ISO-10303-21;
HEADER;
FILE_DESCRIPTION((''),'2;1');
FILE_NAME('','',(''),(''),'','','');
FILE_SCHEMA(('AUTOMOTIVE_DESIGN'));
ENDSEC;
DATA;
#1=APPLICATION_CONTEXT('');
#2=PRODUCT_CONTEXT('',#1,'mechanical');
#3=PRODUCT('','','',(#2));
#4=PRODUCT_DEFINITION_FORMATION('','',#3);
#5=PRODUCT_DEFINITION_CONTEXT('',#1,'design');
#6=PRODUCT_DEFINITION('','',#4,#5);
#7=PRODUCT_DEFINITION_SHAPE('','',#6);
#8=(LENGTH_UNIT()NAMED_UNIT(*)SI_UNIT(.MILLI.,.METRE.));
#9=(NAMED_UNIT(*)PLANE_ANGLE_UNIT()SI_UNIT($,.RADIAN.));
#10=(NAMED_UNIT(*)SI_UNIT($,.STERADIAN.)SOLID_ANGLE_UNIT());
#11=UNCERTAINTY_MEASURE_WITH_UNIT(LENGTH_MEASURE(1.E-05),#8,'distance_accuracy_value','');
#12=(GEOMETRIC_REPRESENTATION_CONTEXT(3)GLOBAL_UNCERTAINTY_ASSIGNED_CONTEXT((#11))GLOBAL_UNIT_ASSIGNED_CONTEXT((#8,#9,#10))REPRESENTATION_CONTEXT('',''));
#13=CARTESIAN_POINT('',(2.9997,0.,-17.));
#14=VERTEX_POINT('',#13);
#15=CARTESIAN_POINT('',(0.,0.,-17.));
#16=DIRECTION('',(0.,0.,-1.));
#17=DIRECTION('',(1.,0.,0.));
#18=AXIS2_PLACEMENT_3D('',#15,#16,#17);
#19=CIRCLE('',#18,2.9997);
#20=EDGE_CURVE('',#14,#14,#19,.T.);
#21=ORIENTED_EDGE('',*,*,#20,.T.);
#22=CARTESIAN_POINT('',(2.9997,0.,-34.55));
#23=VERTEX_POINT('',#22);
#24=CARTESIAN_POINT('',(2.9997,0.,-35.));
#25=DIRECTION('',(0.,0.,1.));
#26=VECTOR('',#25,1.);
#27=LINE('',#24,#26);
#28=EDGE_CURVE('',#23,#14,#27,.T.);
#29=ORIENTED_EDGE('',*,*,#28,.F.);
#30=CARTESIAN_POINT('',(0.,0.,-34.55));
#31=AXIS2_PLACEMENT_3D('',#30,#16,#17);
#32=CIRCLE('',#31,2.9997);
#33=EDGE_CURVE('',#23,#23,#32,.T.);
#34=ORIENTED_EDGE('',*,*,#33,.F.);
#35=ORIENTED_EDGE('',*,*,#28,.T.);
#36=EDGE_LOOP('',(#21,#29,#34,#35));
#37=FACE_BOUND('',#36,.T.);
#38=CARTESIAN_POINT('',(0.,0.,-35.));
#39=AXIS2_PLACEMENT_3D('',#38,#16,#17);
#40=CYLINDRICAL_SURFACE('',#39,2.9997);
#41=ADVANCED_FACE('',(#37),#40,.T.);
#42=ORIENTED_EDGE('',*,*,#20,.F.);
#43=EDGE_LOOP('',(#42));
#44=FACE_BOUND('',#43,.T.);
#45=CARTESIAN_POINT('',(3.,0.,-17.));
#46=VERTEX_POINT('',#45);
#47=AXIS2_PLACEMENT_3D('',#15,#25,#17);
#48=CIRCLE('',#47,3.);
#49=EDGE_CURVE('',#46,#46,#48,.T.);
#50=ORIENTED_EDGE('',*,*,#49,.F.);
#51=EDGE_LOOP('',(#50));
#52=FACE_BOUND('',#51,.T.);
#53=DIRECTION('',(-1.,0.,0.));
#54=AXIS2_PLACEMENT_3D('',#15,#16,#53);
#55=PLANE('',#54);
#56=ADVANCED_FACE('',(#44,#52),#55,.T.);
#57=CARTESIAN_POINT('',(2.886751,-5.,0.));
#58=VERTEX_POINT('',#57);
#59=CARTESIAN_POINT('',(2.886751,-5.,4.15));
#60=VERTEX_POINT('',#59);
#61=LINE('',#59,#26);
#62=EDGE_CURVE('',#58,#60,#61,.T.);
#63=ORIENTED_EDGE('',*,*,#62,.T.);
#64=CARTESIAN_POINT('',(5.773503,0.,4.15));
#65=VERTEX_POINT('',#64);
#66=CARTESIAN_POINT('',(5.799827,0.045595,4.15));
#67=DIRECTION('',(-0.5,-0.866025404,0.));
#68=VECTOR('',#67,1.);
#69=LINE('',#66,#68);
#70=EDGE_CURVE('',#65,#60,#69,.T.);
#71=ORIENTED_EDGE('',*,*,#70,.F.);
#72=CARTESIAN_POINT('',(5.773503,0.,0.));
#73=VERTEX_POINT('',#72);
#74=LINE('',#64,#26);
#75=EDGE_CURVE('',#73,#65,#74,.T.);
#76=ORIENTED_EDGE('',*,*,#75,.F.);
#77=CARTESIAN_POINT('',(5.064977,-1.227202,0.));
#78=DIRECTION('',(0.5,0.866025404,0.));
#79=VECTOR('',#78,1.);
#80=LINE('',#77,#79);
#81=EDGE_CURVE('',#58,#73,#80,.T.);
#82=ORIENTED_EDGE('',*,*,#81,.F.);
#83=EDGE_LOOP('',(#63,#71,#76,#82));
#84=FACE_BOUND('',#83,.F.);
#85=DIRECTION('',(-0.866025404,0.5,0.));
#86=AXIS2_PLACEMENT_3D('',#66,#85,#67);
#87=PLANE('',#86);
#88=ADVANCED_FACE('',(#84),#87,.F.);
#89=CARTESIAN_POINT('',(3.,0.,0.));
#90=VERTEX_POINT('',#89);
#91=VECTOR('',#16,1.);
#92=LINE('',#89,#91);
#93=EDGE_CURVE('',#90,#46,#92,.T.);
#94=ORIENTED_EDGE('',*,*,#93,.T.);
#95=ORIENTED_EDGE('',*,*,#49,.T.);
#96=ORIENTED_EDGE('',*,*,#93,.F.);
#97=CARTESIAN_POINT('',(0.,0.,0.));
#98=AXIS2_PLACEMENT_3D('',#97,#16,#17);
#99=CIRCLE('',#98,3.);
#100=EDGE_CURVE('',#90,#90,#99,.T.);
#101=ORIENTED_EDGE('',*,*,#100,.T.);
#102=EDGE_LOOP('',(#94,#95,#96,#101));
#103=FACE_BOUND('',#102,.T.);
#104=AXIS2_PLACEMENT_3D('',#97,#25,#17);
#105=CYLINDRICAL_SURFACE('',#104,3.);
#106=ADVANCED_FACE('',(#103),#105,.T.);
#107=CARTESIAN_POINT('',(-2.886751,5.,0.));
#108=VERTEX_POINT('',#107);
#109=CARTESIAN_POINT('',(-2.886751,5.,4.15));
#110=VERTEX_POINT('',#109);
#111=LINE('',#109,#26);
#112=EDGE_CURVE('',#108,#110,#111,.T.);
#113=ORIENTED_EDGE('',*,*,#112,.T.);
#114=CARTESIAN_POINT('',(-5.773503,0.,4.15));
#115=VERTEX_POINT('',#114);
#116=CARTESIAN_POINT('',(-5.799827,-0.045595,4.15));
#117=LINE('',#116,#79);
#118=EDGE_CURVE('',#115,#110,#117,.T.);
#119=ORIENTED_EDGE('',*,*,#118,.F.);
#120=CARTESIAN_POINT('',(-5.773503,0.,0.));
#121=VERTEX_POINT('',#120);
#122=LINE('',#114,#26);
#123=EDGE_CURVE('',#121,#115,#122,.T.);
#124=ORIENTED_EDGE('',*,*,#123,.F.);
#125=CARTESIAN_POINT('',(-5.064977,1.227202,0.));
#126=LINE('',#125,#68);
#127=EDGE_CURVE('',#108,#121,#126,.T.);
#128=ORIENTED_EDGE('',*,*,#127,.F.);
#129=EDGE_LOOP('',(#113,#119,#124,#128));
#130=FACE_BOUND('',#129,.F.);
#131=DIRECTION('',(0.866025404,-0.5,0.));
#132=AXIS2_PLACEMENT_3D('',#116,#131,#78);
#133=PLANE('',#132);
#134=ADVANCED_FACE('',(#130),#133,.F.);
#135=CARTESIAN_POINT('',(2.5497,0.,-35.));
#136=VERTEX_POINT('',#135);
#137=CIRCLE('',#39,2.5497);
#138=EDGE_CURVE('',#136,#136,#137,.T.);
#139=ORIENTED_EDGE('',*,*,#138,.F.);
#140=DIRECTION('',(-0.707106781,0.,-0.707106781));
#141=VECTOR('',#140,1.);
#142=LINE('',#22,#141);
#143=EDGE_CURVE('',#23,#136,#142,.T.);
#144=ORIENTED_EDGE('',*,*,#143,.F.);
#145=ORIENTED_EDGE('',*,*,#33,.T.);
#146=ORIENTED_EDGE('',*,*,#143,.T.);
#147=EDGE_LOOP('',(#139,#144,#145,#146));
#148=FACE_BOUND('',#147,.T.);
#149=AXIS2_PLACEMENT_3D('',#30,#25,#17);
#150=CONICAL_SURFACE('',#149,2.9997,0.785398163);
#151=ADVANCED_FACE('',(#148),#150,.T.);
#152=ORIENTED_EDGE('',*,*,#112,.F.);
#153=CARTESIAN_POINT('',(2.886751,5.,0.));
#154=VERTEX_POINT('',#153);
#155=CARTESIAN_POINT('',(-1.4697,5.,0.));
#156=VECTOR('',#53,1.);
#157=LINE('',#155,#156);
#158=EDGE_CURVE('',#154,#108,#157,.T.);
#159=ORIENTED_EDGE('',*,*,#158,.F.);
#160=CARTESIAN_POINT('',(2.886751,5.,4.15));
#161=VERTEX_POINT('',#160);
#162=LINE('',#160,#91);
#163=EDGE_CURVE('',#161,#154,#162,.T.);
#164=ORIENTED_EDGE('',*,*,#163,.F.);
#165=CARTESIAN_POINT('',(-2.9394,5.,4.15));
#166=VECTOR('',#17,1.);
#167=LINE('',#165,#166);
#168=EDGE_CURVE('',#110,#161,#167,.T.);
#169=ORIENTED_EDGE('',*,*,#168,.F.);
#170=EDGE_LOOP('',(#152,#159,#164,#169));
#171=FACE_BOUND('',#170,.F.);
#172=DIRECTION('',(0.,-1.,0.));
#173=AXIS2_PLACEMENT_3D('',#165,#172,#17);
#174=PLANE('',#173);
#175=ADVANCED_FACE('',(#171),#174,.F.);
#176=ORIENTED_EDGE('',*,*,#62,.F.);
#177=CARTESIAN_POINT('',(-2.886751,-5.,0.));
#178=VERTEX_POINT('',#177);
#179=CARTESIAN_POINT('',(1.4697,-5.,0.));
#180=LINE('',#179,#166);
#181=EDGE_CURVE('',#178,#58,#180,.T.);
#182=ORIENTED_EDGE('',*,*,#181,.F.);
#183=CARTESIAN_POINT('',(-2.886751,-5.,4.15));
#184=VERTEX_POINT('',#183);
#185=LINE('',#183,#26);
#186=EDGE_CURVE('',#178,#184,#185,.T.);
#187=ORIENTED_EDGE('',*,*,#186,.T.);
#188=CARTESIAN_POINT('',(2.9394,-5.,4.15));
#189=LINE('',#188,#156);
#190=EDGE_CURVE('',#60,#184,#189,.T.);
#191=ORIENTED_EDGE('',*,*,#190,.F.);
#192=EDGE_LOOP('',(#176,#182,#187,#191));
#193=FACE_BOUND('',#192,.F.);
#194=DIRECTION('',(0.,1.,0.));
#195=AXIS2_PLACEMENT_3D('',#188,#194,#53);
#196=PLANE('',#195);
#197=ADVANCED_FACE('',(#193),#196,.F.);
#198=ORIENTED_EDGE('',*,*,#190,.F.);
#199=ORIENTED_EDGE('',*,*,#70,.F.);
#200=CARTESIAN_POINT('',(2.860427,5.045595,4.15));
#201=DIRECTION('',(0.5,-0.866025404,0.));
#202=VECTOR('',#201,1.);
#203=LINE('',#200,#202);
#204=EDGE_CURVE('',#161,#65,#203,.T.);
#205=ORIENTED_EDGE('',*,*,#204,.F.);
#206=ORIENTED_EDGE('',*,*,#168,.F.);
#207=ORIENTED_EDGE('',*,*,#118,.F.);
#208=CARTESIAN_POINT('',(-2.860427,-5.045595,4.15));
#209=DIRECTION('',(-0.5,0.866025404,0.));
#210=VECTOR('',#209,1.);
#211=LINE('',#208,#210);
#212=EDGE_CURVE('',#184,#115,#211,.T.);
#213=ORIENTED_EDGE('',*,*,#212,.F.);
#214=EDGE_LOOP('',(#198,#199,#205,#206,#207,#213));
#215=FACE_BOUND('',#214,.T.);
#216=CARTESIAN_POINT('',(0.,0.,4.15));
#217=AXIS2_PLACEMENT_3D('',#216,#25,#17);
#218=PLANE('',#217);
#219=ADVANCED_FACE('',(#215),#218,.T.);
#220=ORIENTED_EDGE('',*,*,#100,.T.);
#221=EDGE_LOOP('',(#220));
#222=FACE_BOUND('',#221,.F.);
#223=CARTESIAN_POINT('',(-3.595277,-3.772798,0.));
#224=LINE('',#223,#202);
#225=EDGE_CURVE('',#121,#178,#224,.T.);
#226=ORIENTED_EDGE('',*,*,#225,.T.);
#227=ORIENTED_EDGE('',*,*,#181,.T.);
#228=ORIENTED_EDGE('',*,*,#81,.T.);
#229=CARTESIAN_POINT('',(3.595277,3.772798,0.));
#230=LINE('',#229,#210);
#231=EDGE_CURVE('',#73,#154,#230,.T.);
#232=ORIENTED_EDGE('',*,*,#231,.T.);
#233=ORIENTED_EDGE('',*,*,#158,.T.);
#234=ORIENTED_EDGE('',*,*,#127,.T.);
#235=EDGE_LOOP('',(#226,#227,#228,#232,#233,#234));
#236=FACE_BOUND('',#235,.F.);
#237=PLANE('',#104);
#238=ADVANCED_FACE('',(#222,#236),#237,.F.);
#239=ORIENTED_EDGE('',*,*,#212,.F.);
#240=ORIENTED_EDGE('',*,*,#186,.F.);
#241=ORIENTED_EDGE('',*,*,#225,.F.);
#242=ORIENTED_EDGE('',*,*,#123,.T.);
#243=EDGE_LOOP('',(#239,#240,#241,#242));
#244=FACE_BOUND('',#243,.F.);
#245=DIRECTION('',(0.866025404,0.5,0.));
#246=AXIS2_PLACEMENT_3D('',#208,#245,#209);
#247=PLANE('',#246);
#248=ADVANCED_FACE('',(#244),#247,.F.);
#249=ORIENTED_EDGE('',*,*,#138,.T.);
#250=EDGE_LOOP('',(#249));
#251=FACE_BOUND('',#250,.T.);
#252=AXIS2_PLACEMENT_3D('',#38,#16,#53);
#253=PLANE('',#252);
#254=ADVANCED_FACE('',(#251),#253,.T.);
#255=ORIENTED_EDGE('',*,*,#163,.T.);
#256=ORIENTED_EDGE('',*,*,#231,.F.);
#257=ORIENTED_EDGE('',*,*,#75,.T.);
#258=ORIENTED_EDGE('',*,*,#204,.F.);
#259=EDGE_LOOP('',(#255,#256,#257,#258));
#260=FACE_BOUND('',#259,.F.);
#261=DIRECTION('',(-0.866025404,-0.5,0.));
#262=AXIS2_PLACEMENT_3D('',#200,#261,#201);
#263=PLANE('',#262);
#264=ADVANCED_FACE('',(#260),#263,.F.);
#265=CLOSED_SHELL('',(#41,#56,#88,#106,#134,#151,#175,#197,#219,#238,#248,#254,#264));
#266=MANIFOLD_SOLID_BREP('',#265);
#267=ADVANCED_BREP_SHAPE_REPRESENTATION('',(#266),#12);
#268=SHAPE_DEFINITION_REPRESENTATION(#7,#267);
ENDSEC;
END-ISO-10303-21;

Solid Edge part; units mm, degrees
sketch "Sketch1" plane through (0, 0, 0) normal (0, 0, 1) x (1, 0, 0)
  circle A0 centre (0, 0) radius 5.8
  dimension "D1" = 11.6
extrude "Protrusion1" add sketch "Sketch1" along normal blind 4.15
sketch "Sketch2" plane through (0, 0, 0) normal (0, 0, -1) x (1, 0, 0)
  circle A0 centre (0, 0) radius 3
extrude "Protrusion2" add sketch "Sketch2" along normal blind 35
sketch "Sketch3" plane through (0, 0, -35) normal (0, 0, -1) x (1, 0, 0)
  circle A0 centre (0, 0) radius 2.9997
extrude "Cutout1" cut sketch "Sketch3" against normal blind 18 flip side to cut
chamfer "Chamfer_1" distance 0.45 angle 45 1 edges at (-2.9997, 0, -35)
sketch "Sketch4" plane through (0, 0, 4.15) normal (0, 0, 1) x (1, 0, 0)
  line L0 (-2.9394, 5) -> (2.9394, 5)
  dimension "D1" = 10
extrude "Cutout2" cut sketch "Sketch4" against normal up to next material side at (0, 5.05, 4.15)
pattern_circular "Pattern1" count 6 over 360 about axis through (0, 0, 4.15) along (0, 0, 1) of "Cutout2"
properties part number "24104892"
